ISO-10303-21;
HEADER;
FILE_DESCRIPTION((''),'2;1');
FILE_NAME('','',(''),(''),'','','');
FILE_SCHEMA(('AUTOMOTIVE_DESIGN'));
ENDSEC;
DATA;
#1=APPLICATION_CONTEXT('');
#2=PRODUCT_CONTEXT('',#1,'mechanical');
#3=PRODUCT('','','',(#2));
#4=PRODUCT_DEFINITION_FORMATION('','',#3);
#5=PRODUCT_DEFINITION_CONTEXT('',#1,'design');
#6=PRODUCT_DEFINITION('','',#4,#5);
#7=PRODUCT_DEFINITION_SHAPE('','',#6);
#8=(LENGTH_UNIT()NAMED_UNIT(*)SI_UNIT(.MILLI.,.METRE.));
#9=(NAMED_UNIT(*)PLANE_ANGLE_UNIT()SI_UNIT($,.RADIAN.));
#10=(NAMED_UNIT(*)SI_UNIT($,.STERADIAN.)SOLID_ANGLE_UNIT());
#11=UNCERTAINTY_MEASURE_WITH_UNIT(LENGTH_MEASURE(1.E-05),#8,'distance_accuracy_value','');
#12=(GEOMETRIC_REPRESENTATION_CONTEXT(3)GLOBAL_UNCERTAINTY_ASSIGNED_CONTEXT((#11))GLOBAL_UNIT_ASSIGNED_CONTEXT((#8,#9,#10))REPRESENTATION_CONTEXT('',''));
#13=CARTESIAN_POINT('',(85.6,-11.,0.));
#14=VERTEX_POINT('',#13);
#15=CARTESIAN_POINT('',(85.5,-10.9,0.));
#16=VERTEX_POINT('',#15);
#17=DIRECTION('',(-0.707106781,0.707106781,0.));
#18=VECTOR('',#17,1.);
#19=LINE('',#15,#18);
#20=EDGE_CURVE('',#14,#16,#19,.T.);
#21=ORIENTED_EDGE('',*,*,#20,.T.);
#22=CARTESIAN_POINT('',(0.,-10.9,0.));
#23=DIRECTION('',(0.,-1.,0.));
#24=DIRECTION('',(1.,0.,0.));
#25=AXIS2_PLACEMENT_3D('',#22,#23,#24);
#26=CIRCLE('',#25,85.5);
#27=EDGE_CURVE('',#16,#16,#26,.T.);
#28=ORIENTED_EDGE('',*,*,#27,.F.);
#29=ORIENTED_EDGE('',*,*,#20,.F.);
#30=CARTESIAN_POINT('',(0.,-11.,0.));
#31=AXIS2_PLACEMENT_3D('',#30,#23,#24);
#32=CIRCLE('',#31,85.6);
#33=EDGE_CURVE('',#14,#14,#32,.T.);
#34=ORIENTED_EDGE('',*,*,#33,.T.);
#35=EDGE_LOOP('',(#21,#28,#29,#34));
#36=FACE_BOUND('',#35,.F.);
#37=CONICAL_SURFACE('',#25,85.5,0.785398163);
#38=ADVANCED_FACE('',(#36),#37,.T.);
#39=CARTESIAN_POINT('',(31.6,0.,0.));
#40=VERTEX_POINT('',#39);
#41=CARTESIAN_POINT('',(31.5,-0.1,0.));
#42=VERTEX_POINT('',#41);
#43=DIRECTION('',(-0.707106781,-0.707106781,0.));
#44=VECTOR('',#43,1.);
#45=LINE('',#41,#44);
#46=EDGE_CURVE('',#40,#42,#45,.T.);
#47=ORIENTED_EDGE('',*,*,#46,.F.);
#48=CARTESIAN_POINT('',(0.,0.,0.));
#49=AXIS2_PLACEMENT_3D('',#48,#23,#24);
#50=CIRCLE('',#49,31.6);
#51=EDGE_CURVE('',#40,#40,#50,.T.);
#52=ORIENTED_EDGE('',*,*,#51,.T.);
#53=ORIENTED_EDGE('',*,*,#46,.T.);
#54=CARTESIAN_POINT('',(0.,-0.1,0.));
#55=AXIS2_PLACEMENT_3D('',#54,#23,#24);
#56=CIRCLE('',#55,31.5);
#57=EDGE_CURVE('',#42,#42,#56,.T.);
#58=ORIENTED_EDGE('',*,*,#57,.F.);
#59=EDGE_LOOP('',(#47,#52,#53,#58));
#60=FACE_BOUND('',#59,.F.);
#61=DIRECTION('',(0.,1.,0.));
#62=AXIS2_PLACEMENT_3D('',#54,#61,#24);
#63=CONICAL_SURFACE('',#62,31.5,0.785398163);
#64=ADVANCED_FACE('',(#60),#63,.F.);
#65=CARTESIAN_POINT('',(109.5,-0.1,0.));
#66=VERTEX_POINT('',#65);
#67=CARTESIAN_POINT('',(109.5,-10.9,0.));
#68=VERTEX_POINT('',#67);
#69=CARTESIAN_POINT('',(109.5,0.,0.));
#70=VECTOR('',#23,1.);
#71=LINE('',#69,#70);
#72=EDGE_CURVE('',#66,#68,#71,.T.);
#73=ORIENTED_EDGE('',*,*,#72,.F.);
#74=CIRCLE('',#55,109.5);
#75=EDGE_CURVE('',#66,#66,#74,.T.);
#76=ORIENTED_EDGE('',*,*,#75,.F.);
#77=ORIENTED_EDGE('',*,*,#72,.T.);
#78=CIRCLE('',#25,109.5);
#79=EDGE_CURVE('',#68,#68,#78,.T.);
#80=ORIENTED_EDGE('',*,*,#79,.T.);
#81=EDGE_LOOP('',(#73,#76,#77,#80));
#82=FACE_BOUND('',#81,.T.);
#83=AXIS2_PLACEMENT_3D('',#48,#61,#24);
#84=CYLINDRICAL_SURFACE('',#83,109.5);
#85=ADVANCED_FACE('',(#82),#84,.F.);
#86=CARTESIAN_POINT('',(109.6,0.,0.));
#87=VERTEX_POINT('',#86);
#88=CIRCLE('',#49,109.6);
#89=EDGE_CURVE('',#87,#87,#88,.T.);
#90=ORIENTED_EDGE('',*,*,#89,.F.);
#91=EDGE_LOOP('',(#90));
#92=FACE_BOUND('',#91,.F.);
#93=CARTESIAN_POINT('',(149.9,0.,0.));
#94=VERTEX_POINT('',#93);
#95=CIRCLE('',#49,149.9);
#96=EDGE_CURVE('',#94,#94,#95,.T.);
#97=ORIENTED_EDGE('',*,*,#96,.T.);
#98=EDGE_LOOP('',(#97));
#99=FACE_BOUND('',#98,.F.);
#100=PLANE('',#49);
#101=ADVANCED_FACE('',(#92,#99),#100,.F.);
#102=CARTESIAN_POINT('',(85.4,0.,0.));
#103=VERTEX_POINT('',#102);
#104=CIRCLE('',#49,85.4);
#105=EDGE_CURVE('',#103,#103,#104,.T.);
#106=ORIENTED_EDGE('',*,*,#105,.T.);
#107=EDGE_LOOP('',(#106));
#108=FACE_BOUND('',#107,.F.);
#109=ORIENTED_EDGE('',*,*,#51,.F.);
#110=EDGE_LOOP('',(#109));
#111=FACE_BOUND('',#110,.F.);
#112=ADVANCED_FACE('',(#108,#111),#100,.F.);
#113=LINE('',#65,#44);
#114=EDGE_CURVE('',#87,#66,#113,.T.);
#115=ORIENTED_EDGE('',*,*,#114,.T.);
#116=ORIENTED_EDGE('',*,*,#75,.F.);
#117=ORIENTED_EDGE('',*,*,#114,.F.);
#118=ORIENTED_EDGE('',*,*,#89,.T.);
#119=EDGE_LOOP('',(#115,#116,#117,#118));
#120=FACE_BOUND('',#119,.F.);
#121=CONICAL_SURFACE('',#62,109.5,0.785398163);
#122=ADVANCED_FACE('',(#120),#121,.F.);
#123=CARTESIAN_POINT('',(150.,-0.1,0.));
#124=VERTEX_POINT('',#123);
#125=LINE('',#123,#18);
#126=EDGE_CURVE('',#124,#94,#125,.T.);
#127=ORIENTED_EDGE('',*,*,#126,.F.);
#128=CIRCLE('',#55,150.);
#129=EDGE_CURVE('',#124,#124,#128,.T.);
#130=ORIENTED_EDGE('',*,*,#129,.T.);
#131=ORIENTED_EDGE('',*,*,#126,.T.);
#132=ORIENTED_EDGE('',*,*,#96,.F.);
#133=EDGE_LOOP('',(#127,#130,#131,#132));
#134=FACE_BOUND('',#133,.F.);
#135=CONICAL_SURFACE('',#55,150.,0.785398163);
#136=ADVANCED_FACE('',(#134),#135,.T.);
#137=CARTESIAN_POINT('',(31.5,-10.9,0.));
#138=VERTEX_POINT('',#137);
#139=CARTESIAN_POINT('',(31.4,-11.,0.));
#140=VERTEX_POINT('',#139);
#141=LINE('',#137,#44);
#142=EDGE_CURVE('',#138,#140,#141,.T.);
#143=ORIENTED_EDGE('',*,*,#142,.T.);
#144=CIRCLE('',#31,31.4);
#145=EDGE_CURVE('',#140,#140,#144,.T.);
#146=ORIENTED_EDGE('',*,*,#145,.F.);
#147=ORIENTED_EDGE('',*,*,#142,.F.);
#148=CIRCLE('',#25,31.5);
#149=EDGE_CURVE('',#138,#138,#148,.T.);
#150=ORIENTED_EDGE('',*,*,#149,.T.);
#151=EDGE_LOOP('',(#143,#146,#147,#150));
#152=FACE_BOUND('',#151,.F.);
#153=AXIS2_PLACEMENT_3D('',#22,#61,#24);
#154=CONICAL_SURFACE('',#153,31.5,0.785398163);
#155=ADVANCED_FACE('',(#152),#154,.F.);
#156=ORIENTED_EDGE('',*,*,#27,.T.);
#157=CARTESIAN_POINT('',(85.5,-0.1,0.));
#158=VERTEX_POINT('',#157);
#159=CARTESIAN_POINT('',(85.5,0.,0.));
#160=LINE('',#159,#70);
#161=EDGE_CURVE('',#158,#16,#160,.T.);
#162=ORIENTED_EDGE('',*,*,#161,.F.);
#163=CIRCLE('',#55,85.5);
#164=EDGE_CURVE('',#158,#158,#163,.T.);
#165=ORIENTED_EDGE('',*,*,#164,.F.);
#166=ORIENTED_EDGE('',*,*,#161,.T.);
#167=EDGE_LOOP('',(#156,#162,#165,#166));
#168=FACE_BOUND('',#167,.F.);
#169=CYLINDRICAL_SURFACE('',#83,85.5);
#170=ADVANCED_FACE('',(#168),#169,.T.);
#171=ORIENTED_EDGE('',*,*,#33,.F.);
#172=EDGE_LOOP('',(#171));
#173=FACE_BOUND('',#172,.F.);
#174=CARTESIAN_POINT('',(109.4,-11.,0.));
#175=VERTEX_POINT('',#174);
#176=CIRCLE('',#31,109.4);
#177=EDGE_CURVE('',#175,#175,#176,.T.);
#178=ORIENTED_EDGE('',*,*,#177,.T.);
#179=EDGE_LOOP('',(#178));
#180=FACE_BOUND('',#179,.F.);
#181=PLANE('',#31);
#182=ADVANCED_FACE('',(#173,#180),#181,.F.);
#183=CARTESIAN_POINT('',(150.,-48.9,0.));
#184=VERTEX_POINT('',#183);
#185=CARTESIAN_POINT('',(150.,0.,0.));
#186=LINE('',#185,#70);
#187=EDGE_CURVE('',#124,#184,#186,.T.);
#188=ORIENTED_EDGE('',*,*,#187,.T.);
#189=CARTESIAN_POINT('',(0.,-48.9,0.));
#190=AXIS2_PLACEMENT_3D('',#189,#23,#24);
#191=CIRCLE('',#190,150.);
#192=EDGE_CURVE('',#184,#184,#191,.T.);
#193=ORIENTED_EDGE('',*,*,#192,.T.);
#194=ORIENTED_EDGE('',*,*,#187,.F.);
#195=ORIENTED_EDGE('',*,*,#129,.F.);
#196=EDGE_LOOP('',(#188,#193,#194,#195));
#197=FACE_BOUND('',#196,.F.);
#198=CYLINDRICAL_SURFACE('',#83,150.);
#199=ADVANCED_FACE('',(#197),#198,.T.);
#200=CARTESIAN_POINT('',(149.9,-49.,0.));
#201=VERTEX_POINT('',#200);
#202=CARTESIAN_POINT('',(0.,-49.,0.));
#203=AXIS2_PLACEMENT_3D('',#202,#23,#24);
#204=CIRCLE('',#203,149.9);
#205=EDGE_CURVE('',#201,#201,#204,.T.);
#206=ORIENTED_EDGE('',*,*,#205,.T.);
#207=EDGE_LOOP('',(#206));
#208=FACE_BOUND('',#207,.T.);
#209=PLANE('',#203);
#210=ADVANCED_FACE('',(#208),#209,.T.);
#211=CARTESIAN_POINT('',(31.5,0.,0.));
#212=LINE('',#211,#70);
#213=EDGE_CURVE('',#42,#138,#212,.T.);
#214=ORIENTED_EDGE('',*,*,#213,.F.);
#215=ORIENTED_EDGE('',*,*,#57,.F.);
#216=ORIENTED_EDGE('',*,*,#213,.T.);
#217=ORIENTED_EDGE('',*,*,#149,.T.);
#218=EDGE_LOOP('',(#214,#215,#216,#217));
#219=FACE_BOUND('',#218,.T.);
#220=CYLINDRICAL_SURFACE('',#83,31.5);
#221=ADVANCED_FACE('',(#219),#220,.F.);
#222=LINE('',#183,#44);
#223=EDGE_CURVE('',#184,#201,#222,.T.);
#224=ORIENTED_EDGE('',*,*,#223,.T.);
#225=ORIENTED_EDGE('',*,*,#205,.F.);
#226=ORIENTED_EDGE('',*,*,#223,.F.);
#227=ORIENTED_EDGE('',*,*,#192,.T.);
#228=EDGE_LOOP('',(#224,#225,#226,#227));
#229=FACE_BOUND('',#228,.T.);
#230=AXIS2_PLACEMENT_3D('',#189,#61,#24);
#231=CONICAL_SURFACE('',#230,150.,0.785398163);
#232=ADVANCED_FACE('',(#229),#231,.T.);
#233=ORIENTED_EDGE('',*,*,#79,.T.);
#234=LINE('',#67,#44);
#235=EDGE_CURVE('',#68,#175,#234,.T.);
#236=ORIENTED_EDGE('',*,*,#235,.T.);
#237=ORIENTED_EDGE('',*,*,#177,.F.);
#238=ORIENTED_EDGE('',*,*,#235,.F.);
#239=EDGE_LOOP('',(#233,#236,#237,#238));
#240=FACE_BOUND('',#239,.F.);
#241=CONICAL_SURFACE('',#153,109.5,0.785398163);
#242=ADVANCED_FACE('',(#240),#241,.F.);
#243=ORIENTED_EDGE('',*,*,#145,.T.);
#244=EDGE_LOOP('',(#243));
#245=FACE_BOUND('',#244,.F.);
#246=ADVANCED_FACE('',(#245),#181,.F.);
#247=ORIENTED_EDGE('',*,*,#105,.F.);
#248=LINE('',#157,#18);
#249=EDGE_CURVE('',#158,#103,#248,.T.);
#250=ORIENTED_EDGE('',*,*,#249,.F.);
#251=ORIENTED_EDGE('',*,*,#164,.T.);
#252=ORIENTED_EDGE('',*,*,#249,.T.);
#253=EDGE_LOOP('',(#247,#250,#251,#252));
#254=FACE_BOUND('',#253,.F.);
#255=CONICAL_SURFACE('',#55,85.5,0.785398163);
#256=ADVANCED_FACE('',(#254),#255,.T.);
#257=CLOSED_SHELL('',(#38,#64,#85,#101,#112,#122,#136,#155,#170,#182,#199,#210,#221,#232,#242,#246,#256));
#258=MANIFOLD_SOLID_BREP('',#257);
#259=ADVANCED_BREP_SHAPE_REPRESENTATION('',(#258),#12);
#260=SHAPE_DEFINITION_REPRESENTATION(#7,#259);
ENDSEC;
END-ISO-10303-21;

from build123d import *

# Parameters (mm, degrees)
F0_R     = 150
F1_DEPTH = 49
F2_R     = 109.5
F2_R_2   = 85.5
F2_R_3   = 31.5
F3_DEPTH = 11
F4_SIZE  = 0.1


# Not quite as in the source:
# - a feature names something its author has since deleted; it is built from what else it names


with BuildPart() as f1:
    # F0 (on Front) → F1 (new body)
    with BuildSketch(Plane.XZ):
        Circle(F0_R)
    extrude(amount=F1_DEPTH)

    # F2 (on Front) → F3 (cut)
    with BuildSketch(Plane.XZ):
        Circle(F2_R)
        Circle(F2_R_2, mode=Mode.SUBTRACT)
        Circle(F2_R_3)
    extrude(amount=F3_DEPTH, mode=Mode.SUBTRACT)

    # F4
    f4_edges = [f1.edges().sort_by_distance(p)[0] for p in [
        (-150, 0, 0),
        (150, -24.5, 0),
        (-150, -49, 0),
        (-109.5, 0, 0),
        (109.5, -5.5, 0),
        (-109.5, -11, 0),
        (-85.5, -11, 0),
        (-85.5, 0, 0),
        (85.5, -5.5, 0),
        (31.5, -5.5, 0),
        (-31.5, 0, 0),
        (-31.5, -11, 0),
    ]]
    chamfer(f4_edges, length=F4_SIZE)


solid = f1.part
